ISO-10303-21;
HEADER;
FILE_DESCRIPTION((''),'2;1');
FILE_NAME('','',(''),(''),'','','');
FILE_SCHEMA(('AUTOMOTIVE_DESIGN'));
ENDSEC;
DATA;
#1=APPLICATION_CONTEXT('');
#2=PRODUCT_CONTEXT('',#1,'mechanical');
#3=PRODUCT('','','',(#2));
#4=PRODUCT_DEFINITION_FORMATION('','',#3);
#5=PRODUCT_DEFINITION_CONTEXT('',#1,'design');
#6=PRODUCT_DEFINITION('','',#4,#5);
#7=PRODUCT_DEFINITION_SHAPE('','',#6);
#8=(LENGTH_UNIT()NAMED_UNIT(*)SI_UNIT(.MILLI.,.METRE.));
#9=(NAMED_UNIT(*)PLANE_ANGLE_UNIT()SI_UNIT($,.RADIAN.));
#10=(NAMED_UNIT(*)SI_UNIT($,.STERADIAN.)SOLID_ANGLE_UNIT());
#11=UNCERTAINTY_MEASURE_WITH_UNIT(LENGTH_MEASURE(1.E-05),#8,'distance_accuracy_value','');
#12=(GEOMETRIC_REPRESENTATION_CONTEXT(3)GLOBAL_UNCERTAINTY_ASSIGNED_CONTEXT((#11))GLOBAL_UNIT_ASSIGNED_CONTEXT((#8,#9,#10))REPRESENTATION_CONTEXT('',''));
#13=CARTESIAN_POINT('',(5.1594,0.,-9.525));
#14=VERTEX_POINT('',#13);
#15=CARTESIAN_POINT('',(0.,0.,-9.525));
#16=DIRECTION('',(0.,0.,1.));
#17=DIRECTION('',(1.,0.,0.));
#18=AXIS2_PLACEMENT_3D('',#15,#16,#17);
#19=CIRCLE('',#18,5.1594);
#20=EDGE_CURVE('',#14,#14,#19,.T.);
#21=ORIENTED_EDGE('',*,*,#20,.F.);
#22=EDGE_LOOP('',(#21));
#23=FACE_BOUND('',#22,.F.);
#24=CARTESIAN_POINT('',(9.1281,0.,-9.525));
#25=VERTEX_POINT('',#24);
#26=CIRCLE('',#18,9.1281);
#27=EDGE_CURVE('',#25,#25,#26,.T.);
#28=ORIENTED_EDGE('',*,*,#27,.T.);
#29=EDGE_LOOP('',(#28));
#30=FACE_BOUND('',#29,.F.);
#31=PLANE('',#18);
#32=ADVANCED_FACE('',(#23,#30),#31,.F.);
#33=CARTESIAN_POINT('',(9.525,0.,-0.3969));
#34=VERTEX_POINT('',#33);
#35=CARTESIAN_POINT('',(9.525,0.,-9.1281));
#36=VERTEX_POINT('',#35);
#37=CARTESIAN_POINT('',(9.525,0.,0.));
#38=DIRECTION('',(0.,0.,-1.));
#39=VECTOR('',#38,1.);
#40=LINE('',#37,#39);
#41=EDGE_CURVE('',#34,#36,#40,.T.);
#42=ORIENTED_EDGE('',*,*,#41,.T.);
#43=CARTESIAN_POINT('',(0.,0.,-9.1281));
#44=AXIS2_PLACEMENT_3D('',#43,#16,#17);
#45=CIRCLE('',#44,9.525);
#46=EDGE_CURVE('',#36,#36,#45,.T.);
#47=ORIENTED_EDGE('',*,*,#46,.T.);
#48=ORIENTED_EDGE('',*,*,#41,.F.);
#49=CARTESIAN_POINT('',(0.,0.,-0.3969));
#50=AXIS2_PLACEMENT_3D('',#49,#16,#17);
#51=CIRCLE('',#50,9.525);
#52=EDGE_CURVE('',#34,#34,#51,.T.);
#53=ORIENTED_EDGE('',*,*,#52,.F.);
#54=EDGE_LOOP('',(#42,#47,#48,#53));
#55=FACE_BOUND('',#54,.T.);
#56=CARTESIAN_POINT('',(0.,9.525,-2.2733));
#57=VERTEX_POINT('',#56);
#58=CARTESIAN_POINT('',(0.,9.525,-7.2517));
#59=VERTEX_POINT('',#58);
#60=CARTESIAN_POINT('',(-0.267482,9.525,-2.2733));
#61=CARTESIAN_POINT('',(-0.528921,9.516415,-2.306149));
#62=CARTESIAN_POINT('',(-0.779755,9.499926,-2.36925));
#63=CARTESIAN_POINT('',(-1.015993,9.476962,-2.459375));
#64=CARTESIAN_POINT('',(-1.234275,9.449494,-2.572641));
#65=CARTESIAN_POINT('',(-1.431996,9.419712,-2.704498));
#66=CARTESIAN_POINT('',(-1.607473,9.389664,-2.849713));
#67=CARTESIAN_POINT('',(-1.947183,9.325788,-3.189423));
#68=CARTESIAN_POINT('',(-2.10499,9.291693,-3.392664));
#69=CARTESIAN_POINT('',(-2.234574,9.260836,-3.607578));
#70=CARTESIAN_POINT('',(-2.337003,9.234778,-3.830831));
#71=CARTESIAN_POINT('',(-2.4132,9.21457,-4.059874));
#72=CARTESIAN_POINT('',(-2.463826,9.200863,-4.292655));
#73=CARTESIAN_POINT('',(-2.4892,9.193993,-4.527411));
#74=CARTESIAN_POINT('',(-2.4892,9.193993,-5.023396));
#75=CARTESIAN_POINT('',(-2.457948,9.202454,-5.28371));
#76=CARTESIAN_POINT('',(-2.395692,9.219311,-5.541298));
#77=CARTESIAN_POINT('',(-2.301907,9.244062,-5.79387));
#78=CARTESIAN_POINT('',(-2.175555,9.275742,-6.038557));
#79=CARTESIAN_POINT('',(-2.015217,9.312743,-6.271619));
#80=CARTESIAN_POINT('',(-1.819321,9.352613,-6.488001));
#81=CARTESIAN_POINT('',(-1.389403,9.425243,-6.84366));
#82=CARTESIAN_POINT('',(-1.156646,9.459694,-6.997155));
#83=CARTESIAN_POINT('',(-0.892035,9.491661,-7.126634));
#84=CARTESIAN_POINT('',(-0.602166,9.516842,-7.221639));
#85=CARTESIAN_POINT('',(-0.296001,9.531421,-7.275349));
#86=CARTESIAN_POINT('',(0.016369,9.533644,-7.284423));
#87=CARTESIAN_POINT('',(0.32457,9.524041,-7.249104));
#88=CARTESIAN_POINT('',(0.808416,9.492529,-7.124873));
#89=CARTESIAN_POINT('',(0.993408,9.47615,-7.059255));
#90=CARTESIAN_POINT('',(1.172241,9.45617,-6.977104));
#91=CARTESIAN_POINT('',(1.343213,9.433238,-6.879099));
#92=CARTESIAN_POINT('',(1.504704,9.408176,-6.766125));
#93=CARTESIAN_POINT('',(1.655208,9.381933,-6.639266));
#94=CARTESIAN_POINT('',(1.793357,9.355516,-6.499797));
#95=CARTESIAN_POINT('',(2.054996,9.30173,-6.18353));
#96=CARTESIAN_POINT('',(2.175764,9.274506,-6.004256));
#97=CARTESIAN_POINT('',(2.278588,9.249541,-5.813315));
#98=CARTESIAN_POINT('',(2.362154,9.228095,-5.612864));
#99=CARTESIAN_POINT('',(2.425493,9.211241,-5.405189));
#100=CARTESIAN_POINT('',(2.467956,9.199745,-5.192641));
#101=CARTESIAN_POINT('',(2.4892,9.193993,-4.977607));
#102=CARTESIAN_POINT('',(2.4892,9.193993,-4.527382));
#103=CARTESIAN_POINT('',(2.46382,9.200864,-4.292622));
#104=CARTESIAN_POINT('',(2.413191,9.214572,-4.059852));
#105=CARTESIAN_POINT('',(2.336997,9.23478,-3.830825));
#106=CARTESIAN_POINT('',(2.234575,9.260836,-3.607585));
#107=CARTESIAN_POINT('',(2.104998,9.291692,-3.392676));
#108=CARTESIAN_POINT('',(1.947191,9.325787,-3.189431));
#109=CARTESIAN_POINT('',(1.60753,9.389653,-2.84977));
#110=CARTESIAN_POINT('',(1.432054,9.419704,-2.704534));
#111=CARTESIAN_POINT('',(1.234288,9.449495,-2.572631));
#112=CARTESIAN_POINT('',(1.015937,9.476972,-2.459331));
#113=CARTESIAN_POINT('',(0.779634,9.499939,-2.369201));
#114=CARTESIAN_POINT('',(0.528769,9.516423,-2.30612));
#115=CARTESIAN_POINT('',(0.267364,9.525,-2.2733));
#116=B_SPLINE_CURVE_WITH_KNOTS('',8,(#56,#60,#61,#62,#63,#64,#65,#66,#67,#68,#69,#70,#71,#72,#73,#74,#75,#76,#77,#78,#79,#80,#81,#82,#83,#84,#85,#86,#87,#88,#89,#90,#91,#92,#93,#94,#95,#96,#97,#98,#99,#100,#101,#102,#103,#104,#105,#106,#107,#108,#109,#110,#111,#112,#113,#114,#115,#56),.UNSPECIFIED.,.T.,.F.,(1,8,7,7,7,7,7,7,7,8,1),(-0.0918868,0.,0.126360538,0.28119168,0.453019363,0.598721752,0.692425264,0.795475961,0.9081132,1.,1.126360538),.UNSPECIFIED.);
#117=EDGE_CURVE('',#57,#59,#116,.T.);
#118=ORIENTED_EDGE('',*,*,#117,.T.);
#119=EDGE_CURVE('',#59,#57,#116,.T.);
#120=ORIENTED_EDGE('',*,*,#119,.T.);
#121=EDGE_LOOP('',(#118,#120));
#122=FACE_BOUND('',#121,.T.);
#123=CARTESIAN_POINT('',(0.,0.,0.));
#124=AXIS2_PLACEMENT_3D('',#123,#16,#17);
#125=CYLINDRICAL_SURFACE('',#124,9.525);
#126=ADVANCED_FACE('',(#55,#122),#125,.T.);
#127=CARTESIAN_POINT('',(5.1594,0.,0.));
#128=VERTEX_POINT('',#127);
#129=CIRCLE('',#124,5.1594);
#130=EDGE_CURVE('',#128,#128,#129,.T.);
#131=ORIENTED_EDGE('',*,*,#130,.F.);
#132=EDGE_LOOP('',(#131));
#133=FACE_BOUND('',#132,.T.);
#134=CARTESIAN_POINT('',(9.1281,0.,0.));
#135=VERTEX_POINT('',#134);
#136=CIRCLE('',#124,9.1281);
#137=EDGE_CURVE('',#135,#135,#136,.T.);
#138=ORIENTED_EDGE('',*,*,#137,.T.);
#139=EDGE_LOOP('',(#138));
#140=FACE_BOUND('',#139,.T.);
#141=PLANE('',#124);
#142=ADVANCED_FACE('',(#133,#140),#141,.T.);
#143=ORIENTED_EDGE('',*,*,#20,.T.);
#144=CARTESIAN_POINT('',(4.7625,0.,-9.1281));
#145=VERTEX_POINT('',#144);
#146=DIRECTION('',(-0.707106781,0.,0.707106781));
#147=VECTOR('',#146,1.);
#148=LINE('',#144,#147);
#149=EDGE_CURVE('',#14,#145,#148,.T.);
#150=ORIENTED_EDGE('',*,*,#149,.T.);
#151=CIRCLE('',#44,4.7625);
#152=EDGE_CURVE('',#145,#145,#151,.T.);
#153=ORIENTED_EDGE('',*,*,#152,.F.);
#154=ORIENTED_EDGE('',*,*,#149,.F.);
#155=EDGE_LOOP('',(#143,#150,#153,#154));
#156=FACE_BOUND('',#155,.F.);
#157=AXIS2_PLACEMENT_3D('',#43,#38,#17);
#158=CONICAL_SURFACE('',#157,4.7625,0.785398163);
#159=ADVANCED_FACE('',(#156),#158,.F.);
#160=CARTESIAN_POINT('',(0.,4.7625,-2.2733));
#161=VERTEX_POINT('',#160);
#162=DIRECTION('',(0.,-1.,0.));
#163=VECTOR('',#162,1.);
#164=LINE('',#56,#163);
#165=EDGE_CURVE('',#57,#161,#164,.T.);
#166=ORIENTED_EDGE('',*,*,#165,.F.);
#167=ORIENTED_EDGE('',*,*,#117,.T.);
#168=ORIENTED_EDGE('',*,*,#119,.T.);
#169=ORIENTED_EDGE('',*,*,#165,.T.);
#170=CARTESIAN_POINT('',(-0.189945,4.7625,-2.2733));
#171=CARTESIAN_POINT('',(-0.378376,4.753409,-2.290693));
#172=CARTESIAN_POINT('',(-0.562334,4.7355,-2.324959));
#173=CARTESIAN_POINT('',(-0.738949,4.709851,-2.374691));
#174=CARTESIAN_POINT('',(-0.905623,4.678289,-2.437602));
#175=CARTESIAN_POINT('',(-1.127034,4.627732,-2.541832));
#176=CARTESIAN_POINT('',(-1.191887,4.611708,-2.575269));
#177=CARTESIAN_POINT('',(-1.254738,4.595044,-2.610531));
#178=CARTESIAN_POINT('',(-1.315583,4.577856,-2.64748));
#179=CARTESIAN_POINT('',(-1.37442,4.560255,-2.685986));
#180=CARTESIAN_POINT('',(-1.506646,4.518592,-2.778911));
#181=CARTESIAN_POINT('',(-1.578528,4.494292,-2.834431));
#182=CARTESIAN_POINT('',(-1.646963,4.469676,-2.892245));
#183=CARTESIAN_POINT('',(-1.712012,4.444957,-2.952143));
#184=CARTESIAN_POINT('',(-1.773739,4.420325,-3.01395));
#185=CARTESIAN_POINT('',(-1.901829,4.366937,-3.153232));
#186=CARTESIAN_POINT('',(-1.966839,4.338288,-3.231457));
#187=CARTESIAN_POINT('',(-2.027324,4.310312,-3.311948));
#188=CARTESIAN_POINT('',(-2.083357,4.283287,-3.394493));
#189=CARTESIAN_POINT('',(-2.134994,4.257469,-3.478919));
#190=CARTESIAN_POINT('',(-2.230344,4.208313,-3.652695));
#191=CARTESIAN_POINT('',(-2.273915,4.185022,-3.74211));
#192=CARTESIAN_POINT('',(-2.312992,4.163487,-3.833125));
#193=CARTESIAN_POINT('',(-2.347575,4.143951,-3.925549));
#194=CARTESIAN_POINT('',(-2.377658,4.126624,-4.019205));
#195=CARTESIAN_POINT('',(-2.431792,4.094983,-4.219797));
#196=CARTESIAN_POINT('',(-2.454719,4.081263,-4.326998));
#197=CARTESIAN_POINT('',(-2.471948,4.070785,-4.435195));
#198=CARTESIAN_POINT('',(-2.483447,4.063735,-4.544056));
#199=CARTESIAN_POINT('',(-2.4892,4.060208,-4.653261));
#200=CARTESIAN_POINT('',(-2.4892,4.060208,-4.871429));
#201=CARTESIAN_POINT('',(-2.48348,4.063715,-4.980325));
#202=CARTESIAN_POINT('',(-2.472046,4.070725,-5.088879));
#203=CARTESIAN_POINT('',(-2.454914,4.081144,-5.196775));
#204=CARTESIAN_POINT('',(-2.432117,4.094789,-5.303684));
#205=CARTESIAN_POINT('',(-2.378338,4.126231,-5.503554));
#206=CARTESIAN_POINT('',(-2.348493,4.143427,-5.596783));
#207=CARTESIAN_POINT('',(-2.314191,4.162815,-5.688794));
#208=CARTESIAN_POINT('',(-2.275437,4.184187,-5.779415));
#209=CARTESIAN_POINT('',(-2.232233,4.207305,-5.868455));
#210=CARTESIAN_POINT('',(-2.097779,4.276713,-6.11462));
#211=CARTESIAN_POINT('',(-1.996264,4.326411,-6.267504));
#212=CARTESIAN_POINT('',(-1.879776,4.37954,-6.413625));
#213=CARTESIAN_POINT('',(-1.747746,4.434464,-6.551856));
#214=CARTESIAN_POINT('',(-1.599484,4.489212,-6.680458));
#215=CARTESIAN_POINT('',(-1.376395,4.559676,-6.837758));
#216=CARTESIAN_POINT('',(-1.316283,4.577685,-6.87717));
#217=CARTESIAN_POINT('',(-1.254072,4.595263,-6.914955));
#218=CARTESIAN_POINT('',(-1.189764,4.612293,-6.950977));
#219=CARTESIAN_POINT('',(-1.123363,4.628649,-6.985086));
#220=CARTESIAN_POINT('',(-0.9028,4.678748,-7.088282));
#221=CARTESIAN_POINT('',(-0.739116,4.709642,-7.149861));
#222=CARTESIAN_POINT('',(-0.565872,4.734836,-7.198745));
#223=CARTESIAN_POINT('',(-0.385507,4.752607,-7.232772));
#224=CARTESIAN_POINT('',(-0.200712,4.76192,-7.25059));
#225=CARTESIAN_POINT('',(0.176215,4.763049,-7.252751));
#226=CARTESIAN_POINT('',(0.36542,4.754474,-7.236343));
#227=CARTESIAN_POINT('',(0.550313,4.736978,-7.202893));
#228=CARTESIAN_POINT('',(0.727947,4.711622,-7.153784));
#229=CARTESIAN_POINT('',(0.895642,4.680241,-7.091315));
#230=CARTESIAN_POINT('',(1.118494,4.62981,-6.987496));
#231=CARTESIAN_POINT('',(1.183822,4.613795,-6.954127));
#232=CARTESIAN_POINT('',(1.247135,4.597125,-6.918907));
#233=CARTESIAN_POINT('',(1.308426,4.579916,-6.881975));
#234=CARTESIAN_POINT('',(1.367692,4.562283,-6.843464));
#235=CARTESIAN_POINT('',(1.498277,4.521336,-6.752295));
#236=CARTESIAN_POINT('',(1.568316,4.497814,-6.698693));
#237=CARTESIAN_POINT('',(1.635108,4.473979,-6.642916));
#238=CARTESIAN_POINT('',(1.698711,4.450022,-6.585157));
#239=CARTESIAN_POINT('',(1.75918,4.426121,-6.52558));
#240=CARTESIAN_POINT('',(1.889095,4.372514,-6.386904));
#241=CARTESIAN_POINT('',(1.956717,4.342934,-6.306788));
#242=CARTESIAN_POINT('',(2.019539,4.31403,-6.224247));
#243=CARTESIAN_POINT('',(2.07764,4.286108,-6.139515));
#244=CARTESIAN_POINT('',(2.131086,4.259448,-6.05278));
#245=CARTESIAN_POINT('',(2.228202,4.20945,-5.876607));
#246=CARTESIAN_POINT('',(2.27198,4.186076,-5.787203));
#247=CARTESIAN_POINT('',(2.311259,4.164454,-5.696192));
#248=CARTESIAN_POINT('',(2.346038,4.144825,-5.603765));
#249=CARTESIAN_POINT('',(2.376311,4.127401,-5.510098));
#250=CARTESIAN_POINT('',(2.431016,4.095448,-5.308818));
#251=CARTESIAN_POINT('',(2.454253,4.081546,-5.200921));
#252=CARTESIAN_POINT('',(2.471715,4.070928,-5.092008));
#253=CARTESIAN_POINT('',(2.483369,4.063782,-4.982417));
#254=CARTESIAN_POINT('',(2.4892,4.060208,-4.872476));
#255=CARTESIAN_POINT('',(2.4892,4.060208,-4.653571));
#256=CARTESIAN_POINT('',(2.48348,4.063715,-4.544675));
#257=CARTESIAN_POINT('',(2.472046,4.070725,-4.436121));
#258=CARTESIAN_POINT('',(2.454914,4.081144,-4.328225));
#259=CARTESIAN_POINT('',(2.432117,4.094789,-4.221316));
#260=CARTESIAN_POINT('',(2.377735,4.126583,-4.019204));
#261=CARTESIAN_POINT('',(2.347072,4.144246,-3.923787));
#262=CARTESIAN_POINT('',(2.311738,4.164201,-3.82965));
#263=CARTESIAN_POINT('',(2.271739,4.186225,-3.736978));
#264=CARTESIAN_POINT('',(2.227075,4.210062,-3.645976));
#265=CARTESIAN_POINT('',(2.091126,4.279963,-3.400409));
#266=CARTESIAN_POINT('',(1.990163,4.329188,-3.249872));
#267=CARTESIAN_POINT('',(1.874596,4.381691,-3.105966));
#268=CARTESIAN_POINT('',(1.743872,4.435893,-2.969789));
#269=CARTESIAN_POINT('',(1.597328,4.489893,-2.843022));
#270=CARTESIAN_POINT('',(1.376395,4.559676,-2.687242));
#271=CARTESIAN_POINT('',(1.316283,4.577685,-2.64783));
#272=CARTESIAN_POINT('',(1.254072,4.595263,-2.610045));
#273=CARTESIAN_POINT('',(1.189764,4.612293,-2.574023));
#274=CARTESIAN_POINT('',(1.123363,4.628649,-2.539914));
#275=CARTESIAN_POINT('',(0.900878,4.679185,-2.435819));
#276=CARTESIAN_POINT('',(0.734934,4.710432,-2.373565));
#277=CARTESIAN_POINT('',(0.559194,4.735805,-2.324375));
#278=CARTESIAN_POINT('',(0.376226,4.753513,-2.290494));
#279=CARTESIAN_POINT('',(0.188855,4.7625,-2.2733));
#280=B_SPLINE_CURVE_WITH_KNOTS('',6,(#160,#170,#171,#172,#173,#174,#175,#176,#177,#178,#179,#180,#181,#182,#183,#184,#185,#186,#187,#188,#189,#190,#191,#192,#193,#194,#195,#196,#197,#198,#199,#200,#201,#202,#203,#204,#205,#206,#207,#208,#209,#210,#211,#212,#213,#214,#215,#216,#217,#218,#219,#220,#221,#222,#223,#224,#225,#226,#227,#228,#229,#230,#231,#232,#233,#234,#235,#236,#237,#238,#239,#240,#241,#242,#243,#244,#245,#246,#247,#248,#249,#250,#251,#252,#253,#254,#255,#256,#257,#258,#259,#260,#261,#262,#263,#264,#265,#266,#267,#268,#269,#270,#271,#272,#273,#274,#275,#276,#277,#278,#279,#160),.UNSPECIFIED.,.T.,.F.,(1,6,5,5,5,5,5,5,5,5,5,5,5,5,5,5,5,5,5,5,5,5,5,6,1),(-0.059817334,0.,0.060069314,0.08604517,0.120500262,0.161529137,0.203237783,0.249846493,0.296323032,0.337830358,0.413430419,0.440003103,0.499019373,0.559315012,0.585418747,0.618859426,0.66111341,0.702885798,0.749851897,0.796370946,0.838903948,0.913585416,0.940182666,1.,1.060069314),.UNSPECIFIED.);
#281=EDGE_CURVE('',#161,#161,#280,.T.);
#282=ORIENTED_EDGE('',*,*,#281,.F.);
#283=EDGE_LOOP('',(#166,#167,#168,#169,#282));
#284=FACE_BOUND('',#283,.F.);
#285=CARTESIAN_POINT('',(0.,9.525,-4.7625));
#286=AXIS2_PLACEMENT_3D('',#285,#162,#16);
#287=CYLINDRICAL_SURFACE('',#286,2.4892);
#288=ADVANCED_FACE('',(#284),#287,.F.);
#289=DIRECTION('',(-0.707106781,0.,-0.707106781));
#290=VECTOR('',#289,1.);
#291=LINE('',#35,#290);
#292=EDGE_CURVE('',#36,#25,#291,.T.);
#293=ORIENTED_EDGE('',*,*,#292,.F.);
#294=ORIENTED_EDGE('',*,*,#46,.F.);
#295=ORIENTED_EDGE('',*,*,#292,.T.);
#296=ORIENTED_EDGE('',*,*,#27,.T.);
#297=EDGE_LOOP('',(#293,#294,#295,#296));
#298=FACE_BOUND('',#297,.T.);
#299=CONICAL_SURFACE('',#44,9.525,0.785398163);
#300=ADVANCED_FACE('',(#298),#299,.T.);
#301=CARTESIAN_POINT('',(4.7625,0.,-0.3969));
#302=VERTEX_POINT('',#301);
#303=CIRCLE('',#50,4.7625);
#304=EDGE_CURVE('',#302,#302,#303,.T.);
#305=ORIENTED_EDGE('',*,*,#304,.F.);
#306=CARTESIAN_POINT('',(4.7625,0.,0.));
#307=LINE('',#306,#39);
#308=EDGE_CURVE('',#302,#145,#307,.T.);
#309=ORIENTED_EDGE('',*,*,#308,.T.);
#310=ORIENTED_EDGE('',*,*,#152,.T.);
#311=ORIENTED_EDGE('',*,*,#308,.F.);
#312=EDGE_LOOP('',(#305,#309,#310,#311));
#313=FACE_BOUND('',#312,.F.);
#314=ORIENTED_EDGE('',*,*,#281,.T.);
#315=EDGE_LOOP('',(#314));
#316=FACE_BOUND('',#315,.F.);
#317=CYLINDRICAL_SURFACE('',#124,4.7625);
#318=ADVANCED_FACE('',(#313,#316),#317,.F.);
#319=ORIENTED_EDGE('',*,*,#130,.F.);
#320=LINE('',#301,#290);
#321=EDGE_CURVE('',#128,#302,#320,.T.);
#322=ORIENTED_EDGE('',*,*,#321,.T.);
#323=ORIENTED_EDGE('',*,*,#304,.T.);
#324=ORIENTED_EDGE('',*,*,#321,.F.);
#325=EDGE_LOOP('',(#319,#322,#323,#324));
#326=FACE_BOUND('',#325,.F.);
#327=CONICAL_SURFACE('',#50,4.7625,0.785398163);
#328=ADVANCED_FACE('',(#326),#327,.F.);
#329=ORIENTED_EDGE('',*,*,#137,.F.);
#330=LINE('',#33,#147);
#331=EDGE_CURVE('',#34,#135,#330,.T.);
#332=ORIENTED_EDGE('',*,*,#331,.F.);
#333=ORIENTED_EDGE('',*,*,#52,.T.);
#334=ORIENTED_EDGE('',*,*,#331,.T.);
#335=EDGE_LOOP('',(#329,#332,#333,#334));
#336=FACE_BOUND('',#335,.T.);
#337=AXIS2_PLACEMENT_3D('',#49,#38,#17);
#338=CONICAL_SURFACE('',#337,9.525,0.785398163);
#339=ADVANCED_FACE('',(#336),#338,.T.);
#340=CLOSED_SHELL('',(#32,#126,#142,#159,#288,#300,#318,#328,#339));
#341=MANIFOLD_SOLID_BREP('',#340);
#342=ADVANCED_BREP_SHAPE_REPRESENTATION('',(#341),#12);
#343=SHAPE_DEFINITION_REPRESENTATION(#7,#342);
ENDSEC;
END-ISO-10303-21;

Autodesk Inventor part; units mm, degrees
ref_plane "YZ Plane" through (0, 0, 0) normal (1, 0, 0) x (0, 1, 0)
ref_plane "XY Plane" through (0, 0, 0) normal (0, 0, 1) x (1, 0, 0)
sketch "Sketch1" plane through (0, 0, 0) normal (0, 0, 1) x (1, 0, 0)
  circle A0 centre (0, 0) radius 9.525
  dimension "d0" = 19.05
extrude "Extrusion1" add sketch "Sketch1" against normal blind 9.525
sketch "Sketch2" plane through (0, 0, 0) normal (0, 0, 1) x (1, 0, 0)
  circle A0 centre (0, 0) radius 9.525 projected
  circle A1 centre (0, 0) radius 4.7625
  dimension "d3" = 9.525
extrude "Extrusion2" cut sketch "Sketch2" against normal up to next contours A1
chamfer "Chamfer1" distance 0.3969 angle 45 4 edges at (-9.525, 0, 0) (-9.525, 0, -9.525) (-4.7625, 0, 0) (-4.7625, 0, -9.525)
ref_plane "Work Plane1" through (0, 9.525, 0) normal (0, 1, 0) x (-1, 0, 0)
sketch "Sketch3" plane through (0, 9.525, 0) normal (0, 1, 0) x (-1, 0, 0)
  line L0 (9.1281, -9.525) -> (-9.1281, -9.525) projected
  line L1 (9.525, -0.3969) -> (9.525, -9.1281) projected
  point P0 (0, 0)
  point P1 (0, -4.7625)
  point P2 (0, -9.525)
  point P3 (9.525, -4.7625)
hole "Hole1" at (0, 9.525, -4.7625) direction (0, -1, 0) diameter 4.9784 end up to surface thread size "1/4-20 UNC" class "2B" standard "ANSI Unified Screw Threads"
properties part number "Misc_ShaftCollar_Ruland_SC-6-F" material "Steel, Carbon"
